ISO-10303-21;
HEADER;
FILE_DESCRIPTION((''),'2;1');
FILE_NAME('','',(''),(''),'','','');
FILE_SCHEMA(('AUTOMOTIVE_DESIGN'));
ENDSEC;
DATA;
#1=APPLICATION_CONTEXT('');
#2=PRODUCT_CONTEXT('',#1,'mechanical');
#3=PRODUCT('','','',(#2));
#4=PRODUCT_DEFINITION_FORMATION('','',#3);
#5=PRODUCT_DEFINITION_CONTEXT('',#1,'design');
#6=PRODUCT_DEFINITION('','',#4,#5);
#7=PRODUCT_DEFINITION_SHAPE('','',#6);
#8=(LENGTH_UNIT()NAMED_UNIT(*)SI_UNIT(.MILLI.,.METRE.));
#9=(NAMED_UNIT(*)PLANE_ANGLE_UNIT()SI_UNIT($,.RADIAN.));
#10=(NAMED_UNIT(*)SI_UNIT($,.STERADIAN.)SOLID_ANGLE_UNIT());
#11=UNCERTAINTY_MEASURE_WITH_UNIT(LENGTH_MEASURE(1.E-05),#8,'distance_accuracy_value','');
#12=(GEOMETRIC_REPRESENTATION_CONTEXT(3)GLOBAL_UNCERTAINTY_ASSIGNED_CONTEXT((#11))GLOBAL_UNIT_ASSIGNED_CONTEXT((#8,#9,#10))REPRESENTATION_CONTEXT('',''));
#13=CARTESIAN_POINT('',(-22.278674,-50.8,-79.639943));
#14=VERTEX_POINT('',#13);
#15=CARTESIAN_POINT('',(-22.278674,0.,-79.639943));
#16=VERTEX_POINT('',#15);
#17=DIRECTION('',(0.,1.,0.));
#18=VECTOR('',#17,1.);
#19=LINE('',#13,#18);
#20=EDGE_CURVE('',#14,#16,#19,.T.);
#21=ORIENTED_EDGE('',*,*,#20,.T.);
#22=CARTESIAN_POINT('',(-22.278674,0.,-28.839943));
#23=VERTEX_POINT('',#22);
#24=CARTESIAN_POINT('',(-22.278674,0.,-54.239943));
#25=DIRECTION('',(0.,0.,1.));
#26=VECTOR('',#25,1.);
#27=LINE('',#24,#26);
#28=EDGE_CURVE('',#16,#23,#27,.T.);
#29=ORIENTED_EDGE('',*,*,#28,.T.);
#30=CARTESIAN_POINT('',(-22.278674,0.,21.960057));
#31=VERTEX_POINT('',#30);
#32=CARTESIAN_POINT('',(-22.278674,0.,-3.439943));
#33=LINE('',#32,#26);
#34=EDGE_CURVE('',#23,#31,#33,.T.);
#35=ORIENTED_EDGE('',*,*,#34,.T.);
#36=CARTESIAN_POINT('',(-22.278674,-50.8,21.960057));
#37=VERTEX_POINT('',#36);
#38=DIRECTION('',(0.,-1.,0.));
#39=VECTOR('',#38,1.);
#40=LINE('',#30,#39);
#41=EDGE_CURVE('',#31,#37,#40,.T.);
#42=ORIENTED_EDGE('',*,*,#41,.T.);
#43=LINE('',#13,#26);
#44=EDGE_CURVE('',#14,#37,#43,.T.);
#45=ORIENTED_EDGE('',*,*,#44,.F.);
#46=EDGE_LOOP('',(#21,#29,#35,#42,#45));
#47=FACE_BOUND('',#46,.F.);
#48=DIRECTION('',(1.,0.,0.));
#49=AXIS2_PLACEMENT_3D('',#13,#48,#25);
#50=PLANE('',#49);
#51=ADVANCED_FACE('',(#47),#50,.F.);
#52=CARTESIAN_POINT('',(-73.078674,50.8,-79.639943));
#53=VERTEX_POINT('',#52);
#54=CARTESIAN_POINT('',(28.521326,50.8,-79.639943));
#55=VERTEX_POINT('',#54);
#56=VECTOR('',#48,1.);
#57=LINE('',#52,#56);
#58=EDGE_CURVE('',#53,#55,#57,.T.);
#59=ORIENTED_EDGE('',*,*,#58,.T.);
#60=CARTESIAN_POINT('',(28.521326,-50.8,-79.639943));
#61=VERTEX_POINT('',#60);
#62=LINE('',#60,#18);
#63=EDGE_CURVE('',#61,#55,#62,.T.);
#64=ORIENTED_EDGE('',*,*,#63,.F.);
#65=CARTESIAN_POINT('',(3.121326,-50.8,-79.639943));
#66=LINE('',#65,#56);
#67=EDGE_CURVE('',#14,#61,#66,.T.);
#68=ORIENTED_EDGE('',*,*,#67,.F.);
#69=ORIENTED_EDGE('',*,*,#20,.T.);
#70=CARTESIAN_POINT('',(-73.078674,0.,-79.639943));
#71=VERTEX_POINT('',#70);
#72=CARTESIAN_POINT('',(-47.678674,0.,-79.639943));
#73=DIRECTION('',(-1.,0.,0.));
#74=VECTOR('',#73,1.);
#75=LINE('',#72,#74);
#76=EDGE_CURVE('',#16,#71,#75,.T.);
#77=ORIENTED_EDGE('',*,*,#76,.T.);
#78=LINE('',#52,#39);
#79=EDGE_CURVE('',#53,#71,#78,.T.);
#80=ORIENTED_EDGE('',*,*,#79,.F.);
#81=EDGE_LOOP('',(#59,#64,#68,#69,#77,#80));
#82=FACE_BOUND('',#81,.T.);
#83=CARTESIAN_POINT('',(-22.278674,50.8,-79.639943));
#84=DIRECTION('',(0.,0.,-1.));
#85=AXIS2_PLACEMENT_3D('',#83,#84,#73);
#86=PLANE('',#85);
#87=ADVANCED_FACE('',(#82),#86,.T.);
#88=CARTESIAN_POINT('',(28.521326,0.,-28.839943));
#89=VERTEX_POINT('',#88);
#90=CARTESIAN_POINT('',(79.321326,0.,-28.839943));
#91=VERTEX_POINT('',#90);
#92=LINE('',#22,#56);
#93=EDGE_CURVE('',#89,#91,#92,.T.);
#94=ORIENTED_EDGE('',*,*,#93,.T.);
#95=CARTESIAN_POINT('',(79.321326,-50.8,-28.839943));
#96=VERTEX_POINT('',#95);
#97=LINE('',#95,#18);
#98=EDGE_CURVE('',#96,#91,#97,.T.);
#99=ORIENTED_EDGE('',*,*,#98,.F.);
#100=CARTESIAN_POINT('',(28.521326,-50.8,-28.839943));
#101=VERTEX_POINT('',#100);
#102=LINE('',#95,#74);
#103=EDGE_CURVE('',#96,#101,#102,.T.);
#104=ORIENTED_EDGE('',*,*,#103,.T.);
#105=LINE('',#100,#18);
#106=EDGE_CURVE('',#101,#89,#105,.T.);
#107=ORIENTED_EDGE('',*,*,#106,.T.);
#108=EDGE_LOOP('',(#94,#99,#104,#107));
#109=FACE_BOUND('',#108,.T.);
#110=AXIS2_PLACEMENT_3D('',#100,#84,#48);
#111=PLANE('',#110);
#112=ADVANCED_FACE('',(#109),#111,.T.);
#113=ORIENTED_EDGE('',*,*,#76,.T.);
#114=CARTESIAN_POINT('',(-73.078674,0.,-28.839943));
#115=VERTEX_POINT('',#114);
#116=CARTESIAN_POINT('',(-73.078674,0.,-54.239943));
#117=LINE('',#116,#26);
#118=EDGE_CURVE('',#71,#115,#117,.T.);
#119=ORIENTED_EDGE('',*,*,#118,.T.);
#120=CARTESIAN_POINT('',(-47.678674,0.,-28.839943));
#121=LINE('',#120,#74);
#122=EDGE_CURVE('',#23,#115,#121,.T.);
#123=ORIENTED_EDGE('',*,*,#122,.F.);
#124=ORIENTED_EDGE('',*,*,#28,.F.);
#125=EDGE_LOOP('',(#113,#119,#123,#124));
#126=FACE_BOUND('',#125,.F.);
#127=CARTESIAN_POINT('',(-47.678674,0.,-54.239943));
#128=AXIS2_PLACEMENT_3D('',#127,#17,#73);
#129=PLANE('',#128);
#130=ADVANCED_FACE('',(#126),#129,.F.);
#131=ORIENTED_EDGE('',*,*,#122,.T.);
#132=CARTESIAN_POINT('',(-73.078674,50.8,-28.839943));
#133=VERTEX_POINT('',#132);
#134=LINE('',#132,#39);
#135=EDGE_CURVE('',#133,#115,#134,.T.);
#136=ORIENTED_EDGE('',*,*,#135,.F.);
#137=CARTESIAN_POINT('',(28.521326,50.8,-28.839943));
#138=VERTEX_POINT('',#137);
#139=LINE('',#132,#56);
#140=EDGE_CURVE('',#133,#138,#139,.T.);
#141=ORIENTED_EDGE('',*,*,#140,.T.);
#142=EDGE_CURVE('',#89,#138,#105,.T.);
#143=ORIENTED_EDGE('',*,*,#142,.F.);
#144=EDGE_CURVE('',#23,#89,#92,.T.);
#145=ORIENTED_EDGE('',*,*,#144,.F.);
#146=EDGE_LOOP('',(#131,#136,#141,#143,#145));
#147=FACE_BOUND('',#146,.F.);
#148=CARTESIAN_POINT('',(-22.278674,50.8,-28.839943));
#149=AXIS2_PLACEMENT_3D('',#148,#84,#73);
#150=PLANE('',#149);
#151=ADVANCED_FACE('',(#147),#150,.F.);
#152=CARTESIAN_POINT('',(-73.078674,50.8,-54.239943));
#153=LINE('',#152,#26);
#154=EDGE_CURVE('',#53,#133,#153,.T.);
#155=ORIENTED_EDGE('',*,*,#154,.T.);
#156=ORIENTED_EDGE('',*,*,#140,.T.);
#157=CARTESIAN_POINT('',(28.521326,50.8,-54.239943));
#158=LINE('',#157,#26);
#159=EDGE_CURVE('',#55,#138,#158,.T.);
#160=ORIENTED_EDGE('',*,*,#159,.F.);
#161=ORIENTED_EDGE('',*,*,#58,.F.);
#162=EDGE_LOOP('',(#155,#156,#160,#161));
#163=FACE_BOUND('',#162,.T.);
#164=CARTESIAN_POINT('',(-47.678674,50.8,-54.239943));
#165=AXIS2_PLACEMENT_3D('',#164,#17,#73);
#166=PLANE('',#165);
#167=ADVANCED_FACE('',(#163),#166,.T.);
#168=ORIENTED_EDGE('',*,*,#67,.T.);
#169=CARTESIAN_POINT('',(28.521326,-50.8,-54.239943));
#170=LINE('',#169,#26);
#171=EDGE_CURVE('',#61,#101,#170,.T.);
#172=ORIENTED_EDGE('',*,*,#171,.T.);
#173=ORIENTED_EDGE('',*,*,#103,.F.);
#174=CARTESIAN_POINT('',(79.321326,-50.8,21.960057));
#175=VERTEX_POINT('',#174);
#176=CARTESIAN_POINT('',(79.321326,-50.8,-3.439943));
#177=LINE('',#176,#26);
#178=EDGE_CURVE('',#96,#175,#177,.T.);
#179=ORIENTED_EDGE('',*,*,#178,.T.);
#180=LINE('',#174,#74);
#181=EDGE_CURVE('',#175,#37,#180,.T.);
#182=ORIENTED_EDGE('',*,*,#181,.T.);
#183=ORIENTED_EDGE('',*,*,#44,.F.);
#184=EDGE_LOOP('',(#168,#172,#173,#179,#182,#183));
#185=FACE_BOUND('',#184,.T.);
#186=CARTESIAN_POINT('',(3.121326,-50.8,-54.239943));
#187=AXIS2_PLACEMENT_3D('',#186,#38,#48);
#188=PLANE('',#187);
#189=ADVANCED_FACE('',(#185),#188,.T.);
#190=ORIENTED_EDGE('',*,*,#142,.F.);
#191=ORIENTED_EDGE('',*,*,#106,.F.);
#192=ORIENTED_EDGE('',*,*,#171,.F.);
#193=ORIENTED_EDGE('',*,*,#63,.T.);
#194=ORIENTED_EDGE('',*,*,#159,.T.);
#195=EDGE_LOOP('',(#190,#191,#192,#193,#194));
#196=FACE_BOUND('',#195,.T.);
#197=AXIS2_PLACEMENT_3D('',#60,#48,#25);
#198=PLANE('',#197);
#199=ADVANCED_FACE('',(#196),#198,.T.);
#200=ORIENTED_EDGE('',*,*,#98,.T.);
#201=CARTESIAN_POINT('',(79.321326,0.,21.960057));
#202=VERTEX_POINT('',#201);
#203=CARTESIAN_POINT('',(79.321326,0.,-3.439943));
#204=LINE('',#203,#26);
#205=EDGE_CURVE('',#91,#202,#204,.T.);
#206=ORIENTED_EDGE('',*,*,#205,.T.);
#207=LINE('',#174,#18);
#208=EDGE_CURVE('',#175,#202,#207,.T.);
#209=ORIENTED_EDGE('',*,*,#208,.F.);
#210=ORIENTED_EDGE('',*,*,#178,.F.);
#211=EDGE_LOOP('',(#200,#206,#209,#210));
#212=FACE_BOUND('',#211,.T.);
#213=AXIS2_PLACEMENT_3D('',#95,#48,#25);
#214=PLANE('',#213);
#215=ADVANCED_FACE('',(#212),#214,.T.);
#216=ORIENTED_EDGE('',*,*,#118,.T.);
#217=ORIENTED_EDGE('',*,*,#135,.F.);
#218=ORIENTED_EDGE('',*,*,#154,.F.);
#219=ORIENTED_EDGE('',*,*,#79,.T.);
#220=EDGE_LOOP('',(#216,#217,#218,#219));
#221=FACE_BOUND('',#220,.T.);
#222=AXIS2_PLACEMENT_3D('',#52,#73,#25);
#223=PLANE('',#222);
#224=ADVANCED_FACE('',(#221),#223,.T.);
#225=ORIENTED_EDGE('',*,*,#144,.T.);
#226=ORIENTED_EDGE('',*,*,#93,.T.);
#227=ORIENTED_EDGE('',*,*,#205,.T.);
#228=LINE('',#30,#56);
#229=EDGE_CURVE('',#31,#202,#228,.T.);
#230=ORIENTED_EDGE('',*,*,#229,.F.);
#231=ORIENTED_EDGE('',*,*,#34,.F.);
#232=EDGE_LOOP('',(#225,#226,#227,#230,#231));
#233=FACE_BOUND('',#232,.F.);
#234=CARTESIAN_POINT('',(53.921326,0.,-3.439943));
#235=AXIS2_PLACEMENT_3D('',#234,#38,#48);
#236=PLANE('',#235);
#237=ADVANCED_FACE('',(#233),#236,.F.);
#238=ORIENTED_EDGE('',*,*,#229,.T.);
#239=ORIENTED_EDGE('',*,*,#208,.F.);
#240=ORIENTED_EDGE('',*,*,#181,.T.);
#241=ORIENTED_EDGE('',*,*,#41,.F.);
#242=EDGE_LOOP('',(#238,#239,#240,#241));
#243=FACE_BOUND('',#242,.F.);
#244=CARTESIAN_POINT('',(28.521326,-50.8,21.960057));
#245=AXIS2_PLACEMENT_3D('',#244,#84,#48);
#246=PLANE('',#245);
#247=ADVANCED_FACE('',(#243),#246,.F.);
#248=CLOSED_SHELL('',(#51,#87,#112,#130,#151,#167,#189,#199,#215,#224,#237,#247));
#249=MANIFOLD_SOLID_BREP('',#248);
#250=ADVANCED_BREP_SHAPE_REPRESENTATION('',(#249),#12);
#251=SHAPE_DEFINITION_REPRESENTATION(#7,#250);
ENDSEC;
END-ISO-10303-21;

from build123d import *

# Parameters (mm, degrees)
F1_W     = 50.8
F1_H     = 50.8
F2_DEPTH = 50.8
F3_W     = 50.8
F3_H     = 50.8
F4_DEPTH = 50.8
F5_W     = 50.8
F5_H     = 50.8
F6_DEPTH = 101.6
F7_W     = 50.8
F7_H     = 50.8
F8_DEPTH = 50.8


# Not quite as in the source:
# - a variable given as a bare number and used for a length is read in inches; the dataset says mm whatever the document's units were


with BuildPart() as f2:
    # F1 (on Front) → F2 (new body)
    with BuildSketch(Plane.XZ):
        with Locations((3.1213257462, -3.4399425406)):
            Rectangle(F1_W, F1_H)
    extrude(amount=F2_DEPTH)

    # F3 (on face) → F4 (join)
    with BuildSketch(Plane.XZ.offset(50.8)):
        with Locations((53.9213257462, -3.4399425406)):
            Rectangle(F3_W, F3_H)
    extrude(amount=-F4_DEPTH)

    # F5 (on face) → F6 (join)
    with BuildSketch(Plane.XZ.offset(50.8)):
        with Locations((3.1213257462, -54.2399425406)):
            Rectangle(F5_W, F5_H)
    extrude(amount=-F6_DEPTH)

    # F7 (on face) → F8 (join)
    with BuildSketch(Plane(origin=(0, 50.8, 0), x_dir=(-1, 0, 0), z_dir=(0, 1, 0))):
        with Locations((47.6786742538, -54.2399425406)):
            Rectangle(F7_W, F7_H)
    extrude(amount=-F8_DEPTH)


solid = f2.part
